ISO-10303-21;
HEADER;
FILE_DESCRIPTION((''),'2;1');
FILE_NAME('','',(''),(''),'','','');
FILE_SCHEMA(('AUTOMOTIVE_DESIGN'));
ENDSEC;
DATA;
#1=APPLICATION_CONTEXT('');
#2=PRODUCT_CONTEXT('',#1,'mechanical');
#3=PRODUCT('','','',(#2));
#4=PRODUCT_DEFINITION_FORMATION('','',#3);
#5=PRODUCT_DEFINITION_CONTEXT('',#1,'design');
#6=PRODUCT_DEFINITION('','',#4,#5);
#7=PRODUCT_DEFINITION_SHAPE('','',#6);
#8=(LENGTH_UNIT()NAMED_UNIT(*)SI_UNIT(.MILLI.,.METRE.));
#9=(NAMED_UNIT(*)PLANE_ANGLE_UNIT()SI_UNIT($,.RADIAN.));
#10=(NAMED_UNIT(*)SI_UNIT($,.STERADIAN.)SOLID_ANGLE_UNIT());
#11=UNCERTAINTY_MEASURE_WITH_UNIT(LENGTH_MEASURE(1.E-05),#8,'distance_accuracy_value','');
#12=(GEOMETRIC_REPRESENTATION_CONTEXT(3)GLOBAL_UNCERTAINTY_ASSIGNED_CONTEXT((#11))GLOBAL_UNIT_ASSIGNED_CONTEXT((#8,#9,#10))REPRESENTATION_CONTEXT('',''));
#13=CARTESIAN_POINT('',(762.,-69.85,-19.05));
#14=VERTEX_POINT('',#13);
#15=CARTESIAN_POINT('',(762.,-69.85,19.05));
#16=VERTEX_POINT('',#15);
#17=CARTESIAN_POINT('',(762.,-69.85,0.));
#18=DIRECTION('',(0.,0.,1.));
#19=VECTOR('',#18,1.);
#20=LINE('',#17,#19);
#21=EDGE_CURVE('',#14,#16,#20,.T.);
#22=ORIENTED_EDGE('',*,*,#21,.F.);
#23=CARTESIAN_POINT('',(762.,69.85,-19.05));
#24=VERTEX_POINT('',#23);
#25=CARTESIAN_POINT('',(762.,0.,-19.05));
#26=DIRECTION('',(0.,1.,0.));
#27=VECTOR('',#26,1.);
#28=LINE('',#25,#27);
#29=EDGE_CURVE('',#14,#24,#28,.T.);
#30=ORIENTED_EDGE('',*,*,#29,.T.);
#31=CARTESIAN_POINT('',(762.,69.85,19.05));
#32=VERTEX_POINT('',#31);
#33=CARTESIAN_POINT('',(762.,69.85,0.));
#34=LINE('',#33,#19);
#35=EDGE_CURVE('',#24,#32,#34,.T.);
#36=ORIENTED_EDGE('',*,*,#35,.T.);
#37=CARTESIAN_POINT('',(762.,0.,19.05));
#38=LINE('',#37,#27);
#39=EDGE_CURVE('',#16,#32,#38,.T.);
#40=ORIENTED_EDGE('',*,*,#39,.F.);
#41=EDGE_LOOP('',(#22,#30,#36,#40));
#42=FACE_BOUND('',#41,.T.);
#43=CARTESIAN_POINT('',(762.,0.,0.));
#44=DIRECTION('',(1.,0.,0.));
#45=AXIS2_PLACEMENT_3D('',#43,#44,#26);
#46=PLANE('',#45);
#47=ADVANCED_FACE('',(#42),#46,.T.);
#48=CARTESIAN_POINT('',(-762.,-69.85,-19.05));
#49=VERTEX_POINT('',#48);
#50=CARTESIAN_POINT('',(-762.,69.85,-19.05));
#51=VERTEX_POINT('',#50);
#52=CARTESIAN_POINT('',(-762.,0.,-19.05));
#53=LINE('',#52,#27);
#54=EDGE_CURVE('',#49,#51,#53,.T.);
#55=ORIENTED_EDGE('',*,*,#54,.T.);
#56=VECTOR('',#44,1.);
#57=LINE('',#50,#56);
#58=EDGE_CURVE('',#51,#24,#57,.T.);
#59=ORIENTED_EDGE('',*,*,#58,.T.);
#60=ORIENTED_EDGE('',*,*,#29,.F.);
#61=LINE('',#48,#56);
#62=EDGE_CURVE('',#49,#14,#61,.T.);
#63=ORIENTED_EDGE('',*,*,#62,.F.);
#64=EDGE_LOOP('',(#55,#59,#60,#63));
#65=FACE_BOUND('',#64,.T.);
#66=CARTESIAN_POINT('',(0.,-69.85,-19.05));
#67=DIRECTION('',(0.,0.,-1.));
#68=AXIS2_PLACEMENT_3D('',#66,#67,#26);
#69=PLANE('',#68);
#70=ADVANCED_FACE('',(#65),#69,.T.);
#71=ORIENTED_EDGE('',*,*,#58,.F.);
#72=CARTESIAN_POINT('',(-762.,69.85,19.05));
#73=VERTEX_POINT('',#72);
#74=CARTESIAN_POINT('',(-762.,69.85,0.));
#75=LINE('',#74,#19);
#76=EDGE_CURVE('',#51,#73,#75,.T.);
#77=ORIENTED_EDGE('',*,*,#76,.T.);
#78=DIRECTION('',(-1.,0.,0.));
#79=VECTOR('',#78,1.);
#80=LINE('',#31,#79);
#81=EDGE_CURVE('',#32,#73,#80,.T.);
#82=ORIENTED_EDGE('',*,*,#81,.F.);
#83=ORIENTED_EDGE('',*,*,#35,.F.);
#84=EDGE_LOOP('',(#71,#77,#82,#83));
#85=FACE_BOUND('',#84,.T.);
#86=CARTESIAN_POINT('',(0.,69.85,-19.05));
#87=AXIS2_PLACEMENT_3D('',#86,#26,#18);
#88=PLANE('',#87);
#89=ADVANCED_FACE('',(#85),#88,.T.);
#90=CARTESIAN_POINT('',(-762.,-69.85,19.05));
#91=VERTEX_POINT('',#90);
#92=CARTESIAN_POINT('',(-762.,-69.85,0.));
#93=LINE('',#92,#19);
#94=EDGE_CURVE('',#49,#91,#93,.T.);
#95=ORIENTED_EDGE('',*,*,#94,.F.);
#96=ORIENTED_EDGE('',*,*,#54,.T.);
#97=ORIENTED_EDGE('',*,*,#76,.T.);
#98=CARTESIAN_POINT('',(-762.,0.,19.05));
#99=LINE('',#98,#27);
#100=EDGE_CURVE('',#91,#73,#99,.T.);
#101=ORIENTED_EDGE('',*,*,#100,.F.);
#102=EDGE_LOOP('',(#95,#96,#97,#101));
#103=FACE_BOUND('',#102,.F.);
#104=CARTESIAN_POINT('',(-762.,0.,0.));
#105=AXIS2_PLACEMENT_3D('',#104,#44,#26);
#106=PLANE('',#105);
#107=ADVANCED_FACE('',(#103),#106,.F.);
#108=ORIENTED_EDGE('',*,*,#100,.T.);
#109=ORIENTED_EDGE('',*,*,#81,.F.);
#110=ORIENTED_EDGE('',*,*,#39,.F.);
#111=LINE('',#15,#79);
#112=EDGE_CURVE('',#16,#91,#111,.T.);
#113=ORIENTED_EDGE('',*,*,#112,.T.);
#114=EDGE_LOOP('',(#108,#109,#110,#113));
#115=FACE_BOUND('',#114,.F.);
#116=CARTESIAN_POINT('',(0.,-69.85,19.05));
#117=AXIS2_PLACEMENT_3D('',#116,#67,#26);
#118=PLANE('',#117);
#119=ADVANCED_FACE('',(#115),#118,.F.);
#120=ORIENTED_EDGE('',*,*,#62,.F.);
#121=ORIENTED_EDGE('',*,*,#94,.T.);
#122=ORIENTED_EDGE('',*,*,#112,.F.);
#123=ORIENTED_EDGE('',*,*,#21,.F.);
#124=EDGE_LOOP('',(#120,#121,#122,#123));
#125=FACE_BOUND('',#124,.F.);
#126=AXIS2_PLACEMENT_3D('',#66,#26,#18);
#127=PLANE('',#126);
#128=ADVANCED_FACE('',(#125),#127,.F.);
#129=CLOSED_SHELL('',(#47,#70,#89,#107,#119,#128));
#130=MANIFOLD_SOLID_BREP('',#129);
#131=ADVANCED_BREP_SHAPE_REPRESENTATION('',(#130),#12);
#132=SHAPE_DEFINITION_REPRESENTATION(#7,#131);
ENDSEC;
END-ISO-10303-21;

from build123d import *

# Parameters (mm, degrees)
F1_W     = 139.7
F1_H     = 38.1
F2_DEPTH = 762


# Not quite as in the source:
# - a variable given as a bare number and used for a length is read in inches; the dataset says mm whatever the document's units were


with BuildPart() as f2:
    # F1 (on Right) → F2 (new body, symmetric)
    with BuildSketch(Plane.YZ):
        Rectangle(F1_W, F1_H)
    extrude(amount=F2_DEPTH, both=True)


solid = f2.part
